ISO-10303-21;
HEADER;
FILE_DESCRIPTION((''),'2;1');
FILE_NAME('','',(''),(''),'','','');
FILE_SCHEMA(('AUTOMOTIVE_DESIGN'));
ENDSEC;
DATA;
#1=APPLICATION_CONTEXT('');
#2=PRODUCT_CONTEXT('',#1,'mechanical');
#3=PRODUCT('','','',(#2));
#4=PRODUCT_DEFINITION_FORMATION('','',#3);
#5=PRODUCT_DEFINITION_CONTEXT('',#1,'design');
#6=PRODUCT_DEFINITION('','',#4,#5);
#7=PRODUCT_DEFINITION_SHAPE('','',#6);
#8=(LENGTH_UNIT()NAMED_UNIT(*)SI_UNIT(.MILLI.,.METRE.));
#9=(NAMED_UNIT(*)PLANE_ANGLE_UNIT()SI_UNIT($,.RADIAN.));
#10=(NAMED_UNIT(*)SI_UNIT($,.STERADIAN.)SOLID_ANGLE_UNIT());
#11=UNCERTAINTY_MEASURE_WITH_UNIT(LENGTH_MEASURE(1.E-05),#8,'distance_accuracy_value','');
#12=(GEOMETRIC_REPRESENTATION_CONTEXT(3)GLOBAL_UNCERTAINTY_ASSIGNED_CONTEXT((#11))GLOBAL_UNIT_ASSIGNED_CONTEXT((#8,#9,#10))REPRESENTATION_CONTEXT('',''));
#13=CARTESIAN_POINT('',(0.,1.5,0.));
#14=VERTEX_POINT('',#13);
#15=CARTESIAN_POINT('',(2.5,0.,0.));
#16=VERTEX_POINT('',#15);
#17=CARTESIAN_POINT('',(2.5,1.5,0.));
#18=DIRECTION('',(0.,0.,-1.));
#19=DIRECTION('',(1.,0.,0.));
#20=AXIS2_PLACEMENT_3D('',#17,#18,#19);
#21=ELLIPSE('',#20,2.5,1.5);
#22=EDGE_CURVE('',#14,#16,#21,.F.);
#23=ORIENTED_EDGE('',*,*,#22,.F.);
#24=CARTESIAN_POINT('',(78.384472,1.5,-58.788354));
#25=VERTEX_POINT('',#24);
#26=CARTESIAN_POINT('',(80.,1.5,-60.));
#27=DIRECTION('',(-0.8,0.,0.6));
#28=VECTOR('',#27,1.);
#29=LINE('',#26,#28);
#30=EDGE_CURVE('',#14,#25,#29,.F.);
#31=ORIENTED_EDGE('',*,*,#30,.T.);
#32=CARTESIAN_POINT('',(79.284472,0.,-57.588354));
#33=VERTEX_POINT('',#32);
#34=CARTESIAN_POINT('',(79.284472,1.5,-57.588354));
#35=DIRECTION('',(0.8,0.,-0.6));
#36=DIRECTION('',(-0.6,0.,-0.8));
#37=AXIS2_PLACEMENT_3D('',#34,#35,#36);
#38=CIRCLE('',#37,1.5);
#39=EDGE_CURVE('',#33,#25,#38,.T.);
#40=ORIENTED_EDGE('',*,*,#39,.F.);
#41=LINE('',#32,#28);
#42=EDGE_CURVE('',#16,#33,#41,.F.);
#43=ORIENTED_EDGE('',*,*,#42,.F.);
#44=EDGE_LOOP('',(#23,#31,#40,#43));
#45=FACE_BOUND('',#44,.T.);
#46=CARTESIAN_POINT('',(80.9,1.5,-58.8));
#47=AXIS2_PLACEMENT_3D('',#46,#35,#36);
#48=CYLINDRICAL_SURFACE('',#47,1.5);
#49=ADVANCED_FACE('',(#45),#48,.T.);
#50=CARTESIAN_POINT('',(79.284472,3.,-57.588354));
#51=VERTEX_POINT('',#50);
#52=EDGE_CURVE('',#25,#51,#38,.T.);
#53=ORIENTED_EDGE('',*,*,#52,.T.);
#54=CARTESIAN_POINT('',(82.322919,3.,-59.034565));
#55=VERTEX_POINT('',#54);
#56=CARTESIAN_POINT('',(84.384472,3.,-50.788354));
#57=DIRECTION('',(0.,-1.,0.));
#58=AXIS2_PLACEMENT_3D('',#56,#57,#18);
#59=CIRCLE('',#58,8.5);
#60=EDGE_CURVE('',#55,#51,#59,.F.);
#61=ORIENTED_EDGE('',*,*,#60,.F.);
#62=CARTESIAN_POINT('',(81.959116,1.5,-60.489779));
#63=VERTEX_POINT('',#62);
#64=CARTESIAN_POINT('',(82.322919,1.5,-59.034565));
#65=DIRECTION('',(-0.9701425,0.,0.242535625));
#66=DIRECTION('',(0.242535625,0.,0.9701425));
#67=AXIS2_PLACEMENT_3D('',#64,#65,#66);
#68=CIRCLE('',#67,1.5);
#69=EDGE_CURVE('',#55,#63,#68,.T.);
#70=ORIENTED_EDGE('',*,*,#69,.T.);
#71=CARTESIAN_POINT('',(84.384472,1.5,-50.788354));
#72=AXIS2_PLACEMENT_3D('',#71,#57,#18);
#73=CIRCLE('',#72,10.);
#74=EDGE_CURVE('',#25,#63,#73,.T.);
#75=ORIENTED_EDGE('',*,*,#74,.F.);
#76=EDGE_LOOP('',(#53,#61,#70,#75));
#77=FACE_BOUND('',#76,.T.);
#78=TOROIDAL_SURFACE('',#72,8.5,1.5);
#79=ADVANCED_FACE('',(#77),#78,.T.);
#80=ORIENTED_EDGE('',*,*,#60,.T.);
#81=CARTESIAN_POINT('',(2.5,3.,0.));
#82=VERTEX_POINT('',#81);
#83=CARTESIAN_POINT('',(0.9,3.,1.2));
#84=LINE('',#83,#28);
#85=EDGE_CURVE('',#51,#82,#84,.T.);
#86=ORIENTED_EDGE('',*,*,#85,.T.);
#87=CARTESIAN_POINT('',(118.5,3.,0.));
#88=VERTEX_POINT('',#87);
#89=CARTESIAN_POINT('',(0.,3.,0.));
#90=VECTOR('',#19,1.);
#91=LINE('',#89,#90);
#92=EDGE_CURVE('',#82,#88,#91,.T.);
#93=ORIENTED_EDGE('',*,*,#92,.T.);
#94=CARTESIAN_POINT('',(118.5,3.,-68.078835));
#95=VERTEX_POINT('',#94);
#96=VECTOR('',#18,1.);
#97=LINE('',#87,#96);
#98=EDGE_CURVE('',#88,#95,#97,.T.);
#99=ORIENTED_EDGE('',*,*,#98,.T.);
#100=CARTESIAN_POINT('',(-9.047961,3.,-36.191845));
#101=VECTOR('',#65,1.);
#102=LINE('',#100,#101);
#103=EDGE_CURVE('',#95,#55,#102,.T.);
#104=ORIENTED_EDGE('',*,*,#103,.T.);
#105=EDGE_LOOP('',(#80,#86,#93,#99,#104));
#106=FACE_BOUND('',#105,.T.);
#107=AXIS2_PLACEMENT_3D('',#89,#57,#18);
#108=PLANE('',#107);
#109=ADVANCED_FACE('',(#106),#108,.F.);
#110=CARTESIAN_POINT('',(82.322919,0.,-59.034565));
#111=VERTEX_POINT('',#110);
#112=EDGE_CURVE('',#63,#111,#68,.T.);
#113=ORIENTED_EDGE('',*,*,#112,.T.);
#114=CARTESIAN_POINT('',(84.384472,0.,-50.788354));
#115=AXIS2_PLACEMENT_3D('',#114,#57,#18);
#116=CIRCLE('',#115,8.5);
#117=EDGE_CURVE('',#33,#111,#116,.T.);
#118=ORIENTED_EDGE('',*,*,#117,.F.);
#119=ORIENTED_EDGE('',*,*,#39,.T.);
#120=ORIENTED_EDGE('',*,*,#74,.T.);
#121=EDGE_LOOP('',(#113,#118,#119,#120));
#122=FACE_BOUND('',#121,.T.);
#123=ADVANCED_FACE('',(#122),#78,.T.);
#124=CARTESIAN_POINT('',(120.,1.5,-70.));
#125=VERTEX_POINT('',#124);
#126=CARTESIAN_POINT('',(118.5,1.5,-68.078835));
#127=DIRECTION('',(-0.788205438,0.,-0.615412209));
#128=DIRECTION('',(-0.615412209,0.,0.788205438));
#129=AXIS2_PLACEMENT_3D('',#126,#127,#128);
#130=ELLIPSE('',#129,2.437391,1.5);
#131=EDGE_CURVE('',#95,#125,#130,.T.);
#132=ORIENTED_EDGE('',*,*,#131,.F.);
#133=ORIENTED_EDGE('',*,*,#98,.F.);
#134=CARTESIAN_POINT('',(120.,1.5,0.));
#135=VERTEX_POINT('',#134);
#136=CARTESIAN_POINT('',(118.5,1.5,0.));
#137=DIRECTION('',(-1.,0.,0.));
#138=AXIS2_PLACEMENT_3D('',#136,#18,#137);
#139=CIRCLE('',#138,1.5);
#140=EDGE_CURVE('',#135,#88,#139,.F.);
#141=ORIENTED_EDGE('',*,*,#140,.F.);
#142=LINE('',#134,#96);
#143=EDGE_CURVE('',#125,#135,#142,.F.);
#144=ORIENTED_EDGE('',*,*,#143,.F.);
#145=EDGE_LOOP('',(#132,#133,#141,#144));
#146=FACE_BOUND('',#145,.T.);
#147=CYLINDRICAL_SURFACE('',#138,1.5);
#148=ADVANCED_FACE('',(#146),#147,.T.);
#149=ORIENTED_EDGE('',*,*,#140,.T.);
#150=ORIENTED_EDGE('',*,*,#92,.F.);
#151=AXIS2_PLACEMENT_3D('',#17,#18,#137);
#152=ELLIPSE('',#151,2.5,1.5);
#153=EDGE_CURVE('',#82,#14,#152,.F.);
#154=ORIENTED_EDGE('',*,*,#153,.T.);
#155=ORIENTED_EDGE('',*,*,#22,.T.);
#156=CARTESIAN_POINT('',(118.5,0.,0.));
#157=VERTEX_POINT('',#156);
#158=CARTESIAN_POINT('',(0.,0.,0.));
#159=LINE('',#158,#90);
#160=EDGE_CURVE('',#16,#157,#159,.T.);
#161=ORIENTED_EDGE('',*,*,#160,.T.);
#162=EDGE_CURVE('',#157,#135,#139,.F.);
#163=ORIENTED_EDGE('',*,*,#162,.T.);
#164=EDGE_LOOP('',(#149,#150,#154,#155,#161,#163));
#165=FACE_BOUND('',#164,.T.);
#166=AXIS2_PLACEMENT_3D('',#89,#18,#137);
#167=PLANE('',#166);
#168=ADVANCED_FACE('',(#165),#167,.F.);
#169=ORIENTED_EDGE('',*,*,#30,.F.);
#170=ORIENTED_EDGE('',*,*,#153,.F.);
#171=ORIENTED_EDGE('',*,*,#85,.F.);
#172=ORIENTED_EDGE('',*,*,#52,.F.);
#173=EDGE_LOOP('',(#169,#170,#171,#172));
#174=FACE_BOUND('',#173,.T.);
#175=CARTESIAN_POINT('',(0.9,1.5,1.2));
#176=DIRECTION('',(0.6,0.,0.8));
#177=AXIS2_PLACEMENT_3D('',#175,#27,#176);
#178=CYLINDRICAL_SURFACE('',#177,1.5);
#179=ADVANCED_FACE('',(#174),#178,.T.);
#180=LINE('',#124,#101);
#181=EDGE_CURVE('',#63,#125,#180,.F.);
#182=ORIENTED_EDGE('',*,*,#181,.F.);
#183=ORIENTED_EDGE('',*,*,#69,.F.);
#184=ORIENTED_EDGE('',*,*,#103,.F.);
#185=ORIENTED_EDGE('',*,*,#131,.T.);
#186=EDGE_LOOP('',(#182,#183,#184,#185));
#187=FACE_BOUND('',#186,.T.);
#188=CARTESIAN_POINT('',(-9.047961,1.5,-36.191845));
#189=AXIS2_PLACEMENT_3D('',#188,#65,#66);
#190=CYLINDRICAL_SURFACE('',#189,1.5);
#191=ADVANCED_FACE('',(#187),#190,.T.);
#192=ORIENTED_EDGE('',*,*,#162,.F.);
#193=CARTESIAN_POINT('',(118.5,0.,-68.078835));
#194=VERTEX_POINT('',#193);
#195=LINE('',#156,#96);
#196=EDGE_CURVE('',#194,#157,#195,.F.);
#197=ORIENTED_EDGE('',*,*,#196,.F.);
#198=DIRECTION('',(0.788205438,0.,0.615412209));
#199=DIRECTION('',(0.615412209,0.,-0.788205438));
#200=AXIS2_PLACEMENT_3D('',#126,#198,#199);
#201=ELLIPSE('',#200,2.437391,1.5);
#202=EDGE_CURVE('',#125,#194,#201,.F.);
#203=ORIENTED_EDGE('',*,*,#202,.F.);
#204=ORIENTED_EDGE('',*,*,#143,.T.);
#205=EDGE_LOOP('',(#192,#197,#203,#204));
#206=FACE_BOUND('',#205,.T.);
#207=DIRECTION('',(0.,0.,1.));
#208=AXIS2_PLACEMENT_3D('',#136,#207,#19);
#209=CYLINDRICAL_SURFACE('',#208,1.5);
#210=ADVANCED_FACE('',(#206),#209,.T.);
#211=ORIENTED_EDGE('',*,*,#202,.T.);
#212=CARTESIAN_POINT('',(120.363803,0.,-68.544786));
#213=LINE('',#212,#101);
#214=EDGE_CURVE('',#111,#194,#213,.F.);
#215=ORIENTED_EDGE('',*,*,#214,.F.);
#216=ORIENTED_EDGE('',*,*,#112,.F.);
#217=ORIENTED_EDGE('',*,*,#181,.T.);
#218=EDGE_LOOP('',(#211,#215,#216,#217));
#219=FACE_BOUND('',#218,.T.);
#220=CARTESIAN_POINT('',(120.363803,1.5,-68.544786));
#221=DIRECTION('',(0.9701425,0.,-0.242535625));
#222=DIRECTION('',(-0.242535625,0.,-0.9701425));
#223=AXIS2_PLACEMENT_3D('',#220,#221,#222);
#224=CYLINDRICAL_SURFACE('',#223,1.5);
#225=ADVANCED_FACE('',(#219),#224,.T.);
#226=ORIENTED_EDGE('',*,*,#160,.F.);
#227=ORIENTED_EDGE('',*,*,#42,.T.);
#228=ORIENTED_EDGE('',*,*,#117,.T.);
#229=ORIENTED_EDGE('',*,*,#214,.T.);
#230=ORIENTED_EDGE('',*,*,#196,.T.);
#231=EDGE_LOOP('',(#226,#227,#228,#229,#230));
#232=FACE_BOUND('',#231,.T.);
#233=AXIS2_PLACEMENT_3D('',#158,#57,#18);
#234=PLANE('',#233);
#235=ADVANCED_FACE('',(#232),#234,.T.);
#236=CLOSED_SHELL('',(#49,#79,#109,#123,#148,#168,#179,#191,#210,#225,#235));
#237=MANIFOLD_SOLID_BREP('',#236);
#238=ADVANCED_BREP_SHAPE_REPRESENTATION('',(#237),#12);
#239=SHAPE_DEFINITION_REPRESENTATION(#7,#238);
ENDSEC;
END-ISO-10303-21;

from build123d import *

# Parameters (mm, degrees)
BOSS_EXTRUDE1_DEPTH = 3
FILLET2_R           = 10
FILLET1_R           = 1.5


with BuildPart() as part:
    # Sketch1 → Boss-Extrude1 (new body)
    with BuildSketch(Plane(origin=(0, 0, 0), x_dir=(1, 0, 0), z_dir=(0, 1, 0))):
        Polygon((0, 0), (120, 0), (120, 70), (80, 60), align=None)
    extrude(amount=BOSS_EXTRUDE1_DEPTH)

    # Fillet2
    fillet2_edges = [part.edges().sort_by_distance(p)[0] for p in [
        (80, 1.5, -60),
    ]]
    fillet(fillet2_edges, radius=FILLET2_R)

    # Fillet1
    fillet1_edges = [part.edges().sort_by_distance(p)[0] for p in [
        (120, 3, -35),
        (120, 0, -35),
        (100.979557811, 3, -65.244889453),
        (100.979557811, 0, -65.244889453),
        (39.192235936, 0, -29.394176952),
        (39.192235936, 3, -29.394176952),
        (80.086755182, 0, -59.817729921),
        (80.086755182, 3, -59.817729921),
    ]]
    fillet(fillet1_edges, radius=FILLET1_R - 0.0001)  # a hair under: the kernel refuses the full size


solid = part.part
